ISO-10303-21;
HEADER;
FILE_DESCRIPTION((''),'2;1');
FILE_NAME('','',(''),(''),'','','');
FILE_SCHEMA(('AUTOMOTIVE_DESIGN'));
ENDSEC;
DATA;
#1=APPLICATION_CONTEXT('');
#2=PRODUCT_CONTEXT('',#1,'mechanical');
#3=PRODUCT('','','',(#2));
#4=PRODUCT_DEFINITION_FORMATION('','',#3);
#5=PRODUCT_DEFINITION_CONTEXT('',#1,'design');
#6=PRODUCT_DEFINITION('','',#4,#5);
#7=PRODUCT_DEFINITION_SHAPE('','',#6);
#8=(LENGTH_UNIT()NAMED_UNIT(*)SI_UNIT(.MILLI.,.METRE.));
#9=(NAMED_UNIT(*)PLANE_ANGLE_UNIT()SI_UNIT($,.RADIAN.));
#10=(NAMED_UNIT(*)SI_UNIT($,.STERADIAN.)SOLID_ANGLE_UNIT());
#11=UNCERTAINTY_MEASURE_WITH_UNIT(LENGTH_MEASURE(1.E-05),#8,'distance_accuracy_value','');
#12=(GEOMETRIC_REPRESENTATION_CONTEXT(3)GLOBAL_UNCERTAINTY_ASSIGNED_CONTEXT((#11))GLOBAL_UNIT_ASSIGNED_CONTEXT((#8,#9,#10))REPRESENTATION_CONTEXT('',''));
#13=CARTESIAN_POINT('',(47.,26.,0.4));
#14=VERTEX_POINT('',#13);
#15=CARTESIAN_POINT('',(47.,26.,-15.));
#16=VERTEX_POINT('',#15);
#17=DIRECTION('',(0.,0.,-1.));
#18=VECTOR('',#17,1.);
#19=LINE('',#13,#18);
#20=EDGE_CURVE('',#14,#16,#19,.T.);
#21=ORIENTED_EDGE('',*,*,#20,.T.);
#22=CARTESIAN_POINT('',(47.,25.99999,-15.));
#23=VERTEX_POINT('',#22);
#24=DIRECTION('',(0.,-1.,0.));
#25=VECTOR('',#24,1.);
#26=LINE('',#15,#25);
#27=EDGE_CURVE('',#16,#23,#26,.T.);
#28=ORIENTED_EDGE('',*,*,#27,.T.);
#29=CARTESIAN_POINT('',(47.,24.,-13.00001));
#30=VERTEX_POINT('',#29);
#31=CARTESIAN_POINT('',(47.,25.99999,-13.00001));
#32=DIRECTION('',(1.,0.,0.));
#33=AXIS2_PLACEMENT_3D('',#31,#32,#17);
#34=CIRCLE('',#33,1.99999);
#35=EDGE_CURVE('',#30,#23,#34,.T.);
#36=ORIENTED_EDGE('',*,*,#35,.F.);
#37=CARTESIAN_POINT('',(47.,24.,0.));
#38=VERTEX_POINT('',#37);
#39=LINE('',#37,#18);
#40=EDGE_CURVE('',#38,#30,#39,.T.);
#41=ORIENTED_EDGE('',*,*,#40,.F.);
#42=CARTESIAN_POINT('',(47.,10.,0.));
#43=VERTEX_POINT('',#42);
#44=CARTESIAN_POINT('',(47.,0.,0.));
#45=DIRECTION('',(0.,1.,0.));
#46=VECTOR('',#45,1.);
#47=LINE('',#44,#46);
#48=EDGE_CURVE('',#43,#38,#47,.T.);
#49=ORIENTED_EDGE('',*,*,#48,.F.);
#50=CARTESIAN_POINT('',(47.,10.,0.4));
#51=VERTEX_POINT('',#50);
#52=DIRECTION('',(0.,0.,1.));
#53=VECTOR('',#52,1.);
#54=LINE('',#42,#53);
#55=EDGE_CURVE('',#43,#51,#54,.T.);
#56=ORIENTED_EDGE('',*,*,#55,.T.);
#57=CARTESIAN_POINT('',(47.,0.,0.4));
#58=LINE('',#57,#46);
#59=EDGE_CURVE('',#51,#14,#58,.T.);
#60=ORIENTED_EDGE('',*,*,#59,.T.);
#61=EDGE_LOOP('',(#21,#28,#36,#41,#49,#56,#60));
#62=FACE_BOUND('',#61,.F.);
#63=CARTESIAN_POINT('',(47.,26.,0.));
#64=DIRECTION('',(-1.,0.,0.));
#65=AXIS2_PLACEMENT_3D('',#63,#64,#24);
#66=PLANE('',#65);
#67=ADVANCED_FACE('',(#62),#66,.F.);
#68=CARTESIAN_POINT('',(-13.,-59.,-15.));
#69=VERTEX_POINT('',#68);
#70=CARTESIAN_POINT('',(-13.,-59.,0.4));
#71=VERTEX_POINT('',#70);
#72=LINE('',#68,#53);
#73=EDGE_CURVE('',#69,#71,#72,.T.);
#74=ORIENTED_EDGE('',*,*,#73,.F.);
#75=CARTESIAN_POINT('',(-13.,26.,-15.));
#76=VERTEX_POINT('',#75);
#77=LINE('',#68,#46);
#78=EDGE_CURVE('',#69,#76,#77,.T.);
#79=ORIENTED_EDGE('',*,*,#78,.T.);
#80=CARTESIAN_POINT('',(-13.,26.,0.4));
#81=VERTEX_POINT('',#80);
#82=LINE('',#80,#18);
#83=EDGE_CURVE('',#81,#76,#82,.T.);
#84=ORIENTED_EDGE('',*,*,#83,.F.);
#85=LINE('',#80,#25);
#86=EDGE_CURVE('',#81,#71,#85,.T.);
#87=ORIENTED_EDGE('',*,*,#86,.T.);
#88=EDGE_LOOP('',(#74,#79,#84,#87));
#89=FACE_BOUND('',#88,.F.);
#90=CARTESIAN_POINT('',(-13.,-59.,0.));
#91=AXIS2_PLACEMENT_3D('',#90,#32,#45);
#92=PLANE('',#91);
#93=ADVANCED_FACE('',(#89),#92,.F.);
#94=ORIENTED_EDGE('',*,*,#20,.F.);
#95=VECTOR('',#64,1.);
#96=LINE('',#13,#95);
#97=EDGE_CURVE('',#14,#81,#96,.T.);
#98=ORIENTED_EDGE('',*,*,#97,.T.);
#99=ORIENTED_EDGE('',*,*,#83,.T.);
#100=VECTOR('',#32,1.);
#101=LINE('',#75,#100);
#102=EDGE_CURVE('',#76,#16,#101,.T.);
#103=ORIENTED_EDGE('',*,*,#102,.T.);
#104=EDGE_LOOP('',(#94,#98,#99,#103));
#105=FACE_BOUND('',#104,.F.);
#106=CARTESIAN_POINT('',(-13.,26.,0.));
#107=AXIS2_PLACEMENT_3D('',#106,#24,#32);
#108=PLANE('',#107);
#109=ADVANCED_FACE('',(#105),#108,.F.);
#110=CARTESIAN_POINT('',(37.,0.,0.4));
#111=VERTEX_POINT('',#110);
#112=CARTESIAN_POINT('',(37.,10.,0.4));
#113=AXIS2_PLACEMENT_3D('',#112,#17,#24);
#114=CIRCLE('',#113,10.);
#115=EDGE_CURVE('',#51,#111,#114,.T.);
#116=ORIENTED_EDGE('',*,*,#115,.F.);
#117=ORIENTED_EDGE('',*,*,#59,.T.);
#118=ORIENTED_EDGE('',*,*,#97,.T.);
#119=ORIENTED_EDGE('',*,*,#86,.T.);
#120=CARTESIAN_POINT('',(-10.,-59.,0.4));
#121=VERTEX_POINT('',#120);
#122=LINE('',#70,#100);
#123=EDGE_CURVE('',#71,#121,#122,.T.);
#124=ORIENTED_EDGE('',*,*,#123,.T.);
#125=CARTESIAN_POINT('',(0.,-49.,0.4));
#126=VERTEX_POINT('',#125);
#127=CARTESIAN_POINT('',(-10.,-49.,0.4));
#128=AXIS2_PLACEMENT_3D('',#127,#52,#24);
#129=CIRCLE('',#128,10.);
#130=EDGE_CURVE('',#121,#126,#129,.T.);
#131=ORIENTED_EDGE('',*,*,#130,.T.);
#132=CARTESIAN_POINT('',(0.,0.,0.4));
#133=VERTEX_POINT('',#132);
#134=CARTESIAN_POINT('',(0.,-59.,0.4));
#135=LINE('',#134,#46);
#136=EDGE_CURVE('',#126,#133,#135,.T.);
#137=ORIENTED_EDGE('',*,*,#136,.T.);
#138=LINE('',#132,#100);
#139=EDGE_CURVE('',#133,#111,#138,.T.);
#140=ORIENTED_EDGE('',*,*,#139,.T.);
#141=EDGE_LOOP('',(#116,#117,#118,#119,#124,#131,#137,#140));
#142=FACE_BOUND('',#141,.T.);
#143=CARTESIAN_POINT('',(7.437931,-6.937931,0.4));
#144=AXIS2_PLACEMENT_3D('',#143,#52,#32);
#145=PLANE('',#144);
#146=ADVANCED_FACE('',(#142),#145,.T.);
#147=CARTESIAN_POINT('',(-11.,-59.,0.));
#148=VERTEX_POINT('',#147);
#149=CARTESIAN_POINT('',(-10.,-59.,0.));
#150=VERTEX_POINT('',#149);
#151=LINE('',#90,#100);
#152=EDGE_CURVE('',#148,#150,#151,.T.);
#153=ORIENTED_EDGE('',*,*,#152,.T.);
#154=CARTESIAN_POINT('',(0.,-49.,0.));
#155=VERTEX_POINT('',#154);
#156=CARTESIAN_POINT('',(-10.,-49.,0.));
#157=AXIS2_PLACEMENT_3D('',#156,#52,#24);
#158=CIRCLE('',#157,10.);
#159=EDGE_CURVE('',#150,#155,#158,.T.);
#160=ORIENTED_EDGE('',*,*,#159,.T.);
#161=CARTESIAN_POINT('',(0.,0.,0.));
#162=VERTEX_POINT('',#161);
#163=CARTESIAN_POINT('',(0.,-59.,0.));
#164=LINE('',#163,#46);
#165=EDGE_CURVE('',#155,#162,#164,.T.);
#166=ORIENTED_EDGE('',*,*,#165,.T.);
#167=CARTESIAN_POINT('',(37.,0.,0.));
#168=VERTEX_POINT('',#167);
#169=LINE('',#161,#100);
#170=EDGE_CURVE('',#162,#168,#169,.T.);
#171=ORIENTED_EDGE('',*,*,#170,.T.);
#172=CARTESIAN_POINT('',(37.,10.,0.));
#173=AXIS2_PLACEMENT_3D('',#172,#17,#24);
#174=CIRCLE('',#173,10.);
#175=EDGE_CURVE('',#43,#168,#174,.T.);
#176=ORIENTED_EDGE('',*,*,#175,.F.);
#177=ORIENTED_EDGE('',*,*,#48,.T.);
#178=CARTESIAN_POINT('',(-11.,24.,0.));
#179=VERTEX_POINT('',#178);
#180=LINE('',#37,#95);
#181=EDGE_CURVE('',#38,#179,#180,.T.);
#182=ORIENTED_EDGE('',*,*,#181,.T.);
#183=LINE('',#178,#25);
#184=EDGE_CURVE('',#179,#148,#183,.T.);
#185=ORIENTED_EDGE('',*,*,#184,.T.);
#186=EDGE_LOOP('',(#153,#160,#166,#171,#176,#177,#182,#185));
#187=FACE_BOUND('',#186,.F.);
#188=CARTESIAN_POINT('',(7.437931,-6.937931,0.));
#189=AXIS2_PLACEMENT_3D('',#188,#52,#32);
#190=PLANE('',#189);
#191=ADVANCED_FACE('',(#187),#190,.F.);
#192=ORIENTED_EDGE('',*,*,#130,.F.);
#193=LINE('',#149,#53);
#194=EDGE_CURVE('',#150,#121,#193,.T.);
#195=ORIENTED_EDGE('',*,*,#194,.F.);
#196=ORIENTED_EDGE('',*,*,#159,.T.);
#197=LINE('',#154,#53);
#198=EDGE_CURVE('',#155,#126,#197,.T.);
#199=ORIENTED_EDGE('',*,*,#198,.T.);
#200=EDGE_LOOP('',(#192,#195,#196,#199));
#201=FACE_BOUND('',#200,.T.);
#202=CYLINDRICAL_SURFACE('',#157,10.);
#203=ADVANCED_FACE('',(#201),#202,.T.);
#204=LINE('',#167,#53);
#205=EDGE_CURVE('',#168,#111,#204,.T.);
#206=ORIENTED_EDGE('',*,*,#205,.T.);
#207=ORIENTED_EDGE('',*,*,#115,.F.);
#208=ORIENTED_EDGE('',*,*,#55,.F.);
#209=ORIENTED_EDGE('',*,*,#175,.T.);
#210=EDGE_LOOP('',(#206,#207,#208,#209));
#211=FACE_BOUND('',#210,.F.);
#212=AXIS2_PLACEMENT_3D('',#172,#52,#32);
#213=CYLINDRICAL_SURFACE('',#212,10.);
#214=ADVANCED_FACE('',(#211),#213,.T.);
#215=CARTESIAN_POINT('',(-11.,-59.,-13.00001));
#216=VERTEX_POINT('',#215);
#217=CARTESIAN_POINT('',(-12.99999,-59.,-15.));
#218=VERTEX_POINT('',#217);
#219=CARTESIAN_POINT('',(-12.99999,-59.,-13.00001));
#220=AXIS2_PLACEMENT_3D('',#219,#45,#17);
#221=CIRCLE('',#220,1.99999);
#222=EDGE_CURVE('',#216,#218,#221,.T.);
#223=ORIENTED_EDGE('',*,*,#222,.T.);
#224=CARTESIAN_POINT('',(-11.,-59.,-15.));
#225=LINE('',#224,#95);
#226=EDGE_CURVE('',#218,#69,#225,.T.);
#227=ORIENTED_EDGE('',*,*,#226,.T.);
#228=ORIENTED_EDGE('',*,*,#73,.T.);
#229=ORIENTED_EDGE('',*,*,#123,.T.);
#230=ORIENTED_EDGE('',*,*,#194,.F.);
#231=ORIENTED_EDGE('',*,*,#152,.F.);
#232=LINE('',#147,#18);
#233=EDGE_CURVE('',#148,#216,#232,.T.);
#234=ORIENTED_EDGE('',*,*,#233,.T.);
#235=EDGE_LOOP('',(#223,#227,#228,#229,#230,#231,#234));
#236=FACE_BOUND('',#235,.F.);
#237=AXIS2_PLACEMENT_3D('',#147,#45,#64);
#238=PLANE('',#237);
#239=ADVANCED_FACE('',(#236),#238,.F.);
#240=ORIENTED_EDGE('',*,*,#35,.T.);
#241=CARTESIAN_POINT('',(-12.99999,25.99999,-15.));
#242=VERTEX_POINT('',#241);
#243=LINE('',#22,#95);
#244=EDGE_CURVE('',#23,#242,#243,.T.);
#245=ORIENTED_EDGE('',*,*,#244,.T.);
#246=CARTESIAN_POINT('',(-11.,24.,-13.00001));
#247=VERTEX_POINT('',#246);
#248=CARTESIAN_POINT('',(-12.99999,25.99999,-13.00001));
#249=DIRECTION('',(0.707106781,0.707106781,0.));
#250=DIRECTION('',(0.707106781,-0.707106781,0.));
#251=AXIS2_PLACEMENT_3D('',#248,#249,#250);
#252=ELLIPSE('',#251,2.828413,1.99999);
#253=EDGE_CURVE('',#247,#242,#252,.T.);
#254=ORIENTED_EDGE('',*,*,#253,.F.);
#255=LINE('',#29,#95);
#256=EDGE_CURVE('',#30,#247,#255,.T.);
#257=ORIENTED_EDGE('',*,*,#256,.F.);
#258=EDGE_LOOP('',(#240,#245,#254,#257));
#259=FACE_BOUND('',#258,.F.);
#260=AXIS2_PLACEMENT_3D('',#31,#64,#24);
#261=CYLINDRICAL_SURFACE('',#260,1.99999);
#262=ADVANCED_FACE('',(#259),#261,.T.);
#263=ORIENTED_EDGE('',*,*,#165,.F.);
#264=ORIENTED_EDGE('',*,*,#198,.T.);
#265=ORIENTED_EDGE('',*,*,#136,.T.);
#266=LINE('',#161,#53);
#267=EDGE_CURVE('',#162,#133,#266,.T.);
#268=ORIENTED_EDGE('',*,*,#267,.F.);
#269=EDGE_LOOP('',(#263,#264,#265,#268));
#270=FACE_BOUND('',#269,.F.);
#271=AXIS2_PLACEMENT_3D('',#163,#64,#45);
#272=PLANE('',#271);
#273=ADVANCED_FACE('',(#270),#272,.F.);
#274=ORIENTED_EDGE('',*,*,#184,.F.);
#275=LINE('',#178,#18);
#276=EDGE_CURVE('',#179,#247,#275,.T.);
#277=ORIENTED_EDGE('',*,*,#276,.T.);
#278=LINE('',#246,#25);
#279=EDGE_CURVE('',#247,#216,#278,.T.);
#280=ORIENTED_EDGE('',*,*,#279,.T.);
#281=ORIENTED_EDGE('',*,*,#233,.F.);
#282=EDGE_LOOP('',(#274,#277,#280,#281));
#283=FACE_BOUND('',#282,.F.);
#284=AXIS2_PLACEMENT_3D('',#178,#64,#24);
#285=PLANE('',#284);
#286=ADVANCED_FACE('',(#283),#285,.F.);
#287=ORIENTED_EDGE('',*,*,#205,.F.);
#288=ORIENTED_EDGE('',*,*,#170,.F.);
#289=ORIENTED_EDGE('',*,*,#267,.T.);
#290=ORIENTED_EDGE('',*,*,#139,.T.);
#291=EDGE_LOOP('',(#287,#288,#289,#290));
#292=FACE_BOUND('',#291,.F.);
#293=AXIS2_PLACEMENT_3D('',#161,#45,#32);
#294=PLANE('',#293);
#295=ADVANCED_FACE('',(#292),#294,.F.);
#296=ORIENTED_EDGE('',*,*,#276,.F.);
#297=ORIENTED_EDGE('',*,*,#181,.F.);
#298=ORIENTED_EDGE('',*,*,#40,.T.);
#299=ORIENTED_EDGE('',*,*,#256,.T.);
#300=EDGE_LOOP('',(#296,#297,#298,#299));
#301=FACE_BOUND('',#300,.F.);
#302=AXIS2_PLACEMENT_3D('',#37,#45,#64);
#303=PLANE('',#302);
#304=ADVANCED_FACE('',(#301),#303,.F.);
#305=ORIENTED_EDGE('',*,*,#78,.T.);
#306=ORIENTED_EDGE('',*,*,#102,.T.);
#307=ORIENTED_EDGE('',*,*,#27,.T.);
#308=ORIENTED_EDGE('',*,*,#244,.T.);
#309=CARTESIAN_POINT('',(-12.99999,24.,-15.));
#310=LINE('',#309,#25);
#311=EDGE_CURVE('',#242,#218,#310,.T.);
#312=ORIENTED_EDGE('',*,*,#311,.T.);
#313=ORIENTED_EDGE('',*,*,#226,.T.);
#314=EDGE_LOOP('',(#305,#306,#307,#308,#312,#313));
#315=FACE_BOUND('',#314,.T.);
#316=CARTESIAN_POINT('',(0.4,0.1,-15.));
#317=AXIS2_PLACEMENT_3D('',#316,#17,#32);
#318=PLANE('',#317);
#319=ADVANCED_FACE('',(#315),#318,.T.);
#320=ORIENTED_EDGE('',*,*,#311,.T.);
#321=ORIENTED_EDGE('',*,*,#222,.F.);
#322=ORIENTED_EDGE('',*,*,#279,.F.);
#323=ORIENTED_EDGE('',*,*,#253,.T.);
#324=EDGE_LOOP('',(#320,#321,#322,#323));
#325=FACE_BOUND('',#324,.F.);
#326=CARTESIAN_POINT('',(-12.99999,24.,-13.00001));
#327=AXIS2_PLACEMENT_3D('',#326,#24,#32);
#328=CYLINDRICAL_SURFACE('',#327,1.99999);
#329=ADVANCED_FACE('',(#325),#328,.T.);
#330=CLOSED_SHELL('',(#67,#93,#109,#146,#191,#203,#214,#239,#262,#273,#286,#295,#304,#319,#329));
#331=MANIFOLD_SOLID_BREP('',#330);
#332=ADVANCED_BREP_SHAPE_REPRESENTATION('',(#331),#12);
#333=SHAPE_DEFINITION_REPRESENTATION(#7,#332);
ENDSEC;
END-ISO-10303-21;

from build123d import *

# Parameters (mm, degrees)
F1_DEPTH = 0.4
F3_DEPTH = 15
F4_R     = 1.99999
F5_R     = 10


# Not quite as in the source:
# - a fillet or chamfer is up to 0.001 mm smaller than in the source, because OpenCascade refuses the exact size


with BuildPart() as f1:
    # F0 (on Top) → F1 (new body)
    with BuildSketch(Plane.XY):
        Polygon((-13, -59), (0, -59), (0, 0), (47, 0), (47, 26), (-13, 26), (-13, 0), align=None)
    extrude(amount=F1_DEPTH)

    # F2 (on face) → F3 (join)
    with BuildSketch(Plane(origin=(0, 0, 0), x_dir=(1, 0, 0), z_dir=(0, 0, -1))):
        Polygon((-13, 59), (-13, -26), (-11, -26), (47, -26), (47, -24), (-11, -24), (-11, 59), align=None)
    extrude(amount=F3_DEPTH)

    # F4 (radius 2 in the source; OpenCascade refuses exactly that, so slightly less here)
    f4_edges = [f1.edges().sort_by_distance(p)[0] for p in [
        (-11, -17.5, -15),
        (18, 24, -15),
    ]]
    fillet(f4_edges, radius=F4_R)

    # F5
    f5_edges = [f1.edges().sort_by_distance(p)[0] for p in [
        (0, -59, 0.2),
        (47, 0, 0.2),
    ]]
    fillet(f5_edges, radius=F5_R)


solid = f1.part
